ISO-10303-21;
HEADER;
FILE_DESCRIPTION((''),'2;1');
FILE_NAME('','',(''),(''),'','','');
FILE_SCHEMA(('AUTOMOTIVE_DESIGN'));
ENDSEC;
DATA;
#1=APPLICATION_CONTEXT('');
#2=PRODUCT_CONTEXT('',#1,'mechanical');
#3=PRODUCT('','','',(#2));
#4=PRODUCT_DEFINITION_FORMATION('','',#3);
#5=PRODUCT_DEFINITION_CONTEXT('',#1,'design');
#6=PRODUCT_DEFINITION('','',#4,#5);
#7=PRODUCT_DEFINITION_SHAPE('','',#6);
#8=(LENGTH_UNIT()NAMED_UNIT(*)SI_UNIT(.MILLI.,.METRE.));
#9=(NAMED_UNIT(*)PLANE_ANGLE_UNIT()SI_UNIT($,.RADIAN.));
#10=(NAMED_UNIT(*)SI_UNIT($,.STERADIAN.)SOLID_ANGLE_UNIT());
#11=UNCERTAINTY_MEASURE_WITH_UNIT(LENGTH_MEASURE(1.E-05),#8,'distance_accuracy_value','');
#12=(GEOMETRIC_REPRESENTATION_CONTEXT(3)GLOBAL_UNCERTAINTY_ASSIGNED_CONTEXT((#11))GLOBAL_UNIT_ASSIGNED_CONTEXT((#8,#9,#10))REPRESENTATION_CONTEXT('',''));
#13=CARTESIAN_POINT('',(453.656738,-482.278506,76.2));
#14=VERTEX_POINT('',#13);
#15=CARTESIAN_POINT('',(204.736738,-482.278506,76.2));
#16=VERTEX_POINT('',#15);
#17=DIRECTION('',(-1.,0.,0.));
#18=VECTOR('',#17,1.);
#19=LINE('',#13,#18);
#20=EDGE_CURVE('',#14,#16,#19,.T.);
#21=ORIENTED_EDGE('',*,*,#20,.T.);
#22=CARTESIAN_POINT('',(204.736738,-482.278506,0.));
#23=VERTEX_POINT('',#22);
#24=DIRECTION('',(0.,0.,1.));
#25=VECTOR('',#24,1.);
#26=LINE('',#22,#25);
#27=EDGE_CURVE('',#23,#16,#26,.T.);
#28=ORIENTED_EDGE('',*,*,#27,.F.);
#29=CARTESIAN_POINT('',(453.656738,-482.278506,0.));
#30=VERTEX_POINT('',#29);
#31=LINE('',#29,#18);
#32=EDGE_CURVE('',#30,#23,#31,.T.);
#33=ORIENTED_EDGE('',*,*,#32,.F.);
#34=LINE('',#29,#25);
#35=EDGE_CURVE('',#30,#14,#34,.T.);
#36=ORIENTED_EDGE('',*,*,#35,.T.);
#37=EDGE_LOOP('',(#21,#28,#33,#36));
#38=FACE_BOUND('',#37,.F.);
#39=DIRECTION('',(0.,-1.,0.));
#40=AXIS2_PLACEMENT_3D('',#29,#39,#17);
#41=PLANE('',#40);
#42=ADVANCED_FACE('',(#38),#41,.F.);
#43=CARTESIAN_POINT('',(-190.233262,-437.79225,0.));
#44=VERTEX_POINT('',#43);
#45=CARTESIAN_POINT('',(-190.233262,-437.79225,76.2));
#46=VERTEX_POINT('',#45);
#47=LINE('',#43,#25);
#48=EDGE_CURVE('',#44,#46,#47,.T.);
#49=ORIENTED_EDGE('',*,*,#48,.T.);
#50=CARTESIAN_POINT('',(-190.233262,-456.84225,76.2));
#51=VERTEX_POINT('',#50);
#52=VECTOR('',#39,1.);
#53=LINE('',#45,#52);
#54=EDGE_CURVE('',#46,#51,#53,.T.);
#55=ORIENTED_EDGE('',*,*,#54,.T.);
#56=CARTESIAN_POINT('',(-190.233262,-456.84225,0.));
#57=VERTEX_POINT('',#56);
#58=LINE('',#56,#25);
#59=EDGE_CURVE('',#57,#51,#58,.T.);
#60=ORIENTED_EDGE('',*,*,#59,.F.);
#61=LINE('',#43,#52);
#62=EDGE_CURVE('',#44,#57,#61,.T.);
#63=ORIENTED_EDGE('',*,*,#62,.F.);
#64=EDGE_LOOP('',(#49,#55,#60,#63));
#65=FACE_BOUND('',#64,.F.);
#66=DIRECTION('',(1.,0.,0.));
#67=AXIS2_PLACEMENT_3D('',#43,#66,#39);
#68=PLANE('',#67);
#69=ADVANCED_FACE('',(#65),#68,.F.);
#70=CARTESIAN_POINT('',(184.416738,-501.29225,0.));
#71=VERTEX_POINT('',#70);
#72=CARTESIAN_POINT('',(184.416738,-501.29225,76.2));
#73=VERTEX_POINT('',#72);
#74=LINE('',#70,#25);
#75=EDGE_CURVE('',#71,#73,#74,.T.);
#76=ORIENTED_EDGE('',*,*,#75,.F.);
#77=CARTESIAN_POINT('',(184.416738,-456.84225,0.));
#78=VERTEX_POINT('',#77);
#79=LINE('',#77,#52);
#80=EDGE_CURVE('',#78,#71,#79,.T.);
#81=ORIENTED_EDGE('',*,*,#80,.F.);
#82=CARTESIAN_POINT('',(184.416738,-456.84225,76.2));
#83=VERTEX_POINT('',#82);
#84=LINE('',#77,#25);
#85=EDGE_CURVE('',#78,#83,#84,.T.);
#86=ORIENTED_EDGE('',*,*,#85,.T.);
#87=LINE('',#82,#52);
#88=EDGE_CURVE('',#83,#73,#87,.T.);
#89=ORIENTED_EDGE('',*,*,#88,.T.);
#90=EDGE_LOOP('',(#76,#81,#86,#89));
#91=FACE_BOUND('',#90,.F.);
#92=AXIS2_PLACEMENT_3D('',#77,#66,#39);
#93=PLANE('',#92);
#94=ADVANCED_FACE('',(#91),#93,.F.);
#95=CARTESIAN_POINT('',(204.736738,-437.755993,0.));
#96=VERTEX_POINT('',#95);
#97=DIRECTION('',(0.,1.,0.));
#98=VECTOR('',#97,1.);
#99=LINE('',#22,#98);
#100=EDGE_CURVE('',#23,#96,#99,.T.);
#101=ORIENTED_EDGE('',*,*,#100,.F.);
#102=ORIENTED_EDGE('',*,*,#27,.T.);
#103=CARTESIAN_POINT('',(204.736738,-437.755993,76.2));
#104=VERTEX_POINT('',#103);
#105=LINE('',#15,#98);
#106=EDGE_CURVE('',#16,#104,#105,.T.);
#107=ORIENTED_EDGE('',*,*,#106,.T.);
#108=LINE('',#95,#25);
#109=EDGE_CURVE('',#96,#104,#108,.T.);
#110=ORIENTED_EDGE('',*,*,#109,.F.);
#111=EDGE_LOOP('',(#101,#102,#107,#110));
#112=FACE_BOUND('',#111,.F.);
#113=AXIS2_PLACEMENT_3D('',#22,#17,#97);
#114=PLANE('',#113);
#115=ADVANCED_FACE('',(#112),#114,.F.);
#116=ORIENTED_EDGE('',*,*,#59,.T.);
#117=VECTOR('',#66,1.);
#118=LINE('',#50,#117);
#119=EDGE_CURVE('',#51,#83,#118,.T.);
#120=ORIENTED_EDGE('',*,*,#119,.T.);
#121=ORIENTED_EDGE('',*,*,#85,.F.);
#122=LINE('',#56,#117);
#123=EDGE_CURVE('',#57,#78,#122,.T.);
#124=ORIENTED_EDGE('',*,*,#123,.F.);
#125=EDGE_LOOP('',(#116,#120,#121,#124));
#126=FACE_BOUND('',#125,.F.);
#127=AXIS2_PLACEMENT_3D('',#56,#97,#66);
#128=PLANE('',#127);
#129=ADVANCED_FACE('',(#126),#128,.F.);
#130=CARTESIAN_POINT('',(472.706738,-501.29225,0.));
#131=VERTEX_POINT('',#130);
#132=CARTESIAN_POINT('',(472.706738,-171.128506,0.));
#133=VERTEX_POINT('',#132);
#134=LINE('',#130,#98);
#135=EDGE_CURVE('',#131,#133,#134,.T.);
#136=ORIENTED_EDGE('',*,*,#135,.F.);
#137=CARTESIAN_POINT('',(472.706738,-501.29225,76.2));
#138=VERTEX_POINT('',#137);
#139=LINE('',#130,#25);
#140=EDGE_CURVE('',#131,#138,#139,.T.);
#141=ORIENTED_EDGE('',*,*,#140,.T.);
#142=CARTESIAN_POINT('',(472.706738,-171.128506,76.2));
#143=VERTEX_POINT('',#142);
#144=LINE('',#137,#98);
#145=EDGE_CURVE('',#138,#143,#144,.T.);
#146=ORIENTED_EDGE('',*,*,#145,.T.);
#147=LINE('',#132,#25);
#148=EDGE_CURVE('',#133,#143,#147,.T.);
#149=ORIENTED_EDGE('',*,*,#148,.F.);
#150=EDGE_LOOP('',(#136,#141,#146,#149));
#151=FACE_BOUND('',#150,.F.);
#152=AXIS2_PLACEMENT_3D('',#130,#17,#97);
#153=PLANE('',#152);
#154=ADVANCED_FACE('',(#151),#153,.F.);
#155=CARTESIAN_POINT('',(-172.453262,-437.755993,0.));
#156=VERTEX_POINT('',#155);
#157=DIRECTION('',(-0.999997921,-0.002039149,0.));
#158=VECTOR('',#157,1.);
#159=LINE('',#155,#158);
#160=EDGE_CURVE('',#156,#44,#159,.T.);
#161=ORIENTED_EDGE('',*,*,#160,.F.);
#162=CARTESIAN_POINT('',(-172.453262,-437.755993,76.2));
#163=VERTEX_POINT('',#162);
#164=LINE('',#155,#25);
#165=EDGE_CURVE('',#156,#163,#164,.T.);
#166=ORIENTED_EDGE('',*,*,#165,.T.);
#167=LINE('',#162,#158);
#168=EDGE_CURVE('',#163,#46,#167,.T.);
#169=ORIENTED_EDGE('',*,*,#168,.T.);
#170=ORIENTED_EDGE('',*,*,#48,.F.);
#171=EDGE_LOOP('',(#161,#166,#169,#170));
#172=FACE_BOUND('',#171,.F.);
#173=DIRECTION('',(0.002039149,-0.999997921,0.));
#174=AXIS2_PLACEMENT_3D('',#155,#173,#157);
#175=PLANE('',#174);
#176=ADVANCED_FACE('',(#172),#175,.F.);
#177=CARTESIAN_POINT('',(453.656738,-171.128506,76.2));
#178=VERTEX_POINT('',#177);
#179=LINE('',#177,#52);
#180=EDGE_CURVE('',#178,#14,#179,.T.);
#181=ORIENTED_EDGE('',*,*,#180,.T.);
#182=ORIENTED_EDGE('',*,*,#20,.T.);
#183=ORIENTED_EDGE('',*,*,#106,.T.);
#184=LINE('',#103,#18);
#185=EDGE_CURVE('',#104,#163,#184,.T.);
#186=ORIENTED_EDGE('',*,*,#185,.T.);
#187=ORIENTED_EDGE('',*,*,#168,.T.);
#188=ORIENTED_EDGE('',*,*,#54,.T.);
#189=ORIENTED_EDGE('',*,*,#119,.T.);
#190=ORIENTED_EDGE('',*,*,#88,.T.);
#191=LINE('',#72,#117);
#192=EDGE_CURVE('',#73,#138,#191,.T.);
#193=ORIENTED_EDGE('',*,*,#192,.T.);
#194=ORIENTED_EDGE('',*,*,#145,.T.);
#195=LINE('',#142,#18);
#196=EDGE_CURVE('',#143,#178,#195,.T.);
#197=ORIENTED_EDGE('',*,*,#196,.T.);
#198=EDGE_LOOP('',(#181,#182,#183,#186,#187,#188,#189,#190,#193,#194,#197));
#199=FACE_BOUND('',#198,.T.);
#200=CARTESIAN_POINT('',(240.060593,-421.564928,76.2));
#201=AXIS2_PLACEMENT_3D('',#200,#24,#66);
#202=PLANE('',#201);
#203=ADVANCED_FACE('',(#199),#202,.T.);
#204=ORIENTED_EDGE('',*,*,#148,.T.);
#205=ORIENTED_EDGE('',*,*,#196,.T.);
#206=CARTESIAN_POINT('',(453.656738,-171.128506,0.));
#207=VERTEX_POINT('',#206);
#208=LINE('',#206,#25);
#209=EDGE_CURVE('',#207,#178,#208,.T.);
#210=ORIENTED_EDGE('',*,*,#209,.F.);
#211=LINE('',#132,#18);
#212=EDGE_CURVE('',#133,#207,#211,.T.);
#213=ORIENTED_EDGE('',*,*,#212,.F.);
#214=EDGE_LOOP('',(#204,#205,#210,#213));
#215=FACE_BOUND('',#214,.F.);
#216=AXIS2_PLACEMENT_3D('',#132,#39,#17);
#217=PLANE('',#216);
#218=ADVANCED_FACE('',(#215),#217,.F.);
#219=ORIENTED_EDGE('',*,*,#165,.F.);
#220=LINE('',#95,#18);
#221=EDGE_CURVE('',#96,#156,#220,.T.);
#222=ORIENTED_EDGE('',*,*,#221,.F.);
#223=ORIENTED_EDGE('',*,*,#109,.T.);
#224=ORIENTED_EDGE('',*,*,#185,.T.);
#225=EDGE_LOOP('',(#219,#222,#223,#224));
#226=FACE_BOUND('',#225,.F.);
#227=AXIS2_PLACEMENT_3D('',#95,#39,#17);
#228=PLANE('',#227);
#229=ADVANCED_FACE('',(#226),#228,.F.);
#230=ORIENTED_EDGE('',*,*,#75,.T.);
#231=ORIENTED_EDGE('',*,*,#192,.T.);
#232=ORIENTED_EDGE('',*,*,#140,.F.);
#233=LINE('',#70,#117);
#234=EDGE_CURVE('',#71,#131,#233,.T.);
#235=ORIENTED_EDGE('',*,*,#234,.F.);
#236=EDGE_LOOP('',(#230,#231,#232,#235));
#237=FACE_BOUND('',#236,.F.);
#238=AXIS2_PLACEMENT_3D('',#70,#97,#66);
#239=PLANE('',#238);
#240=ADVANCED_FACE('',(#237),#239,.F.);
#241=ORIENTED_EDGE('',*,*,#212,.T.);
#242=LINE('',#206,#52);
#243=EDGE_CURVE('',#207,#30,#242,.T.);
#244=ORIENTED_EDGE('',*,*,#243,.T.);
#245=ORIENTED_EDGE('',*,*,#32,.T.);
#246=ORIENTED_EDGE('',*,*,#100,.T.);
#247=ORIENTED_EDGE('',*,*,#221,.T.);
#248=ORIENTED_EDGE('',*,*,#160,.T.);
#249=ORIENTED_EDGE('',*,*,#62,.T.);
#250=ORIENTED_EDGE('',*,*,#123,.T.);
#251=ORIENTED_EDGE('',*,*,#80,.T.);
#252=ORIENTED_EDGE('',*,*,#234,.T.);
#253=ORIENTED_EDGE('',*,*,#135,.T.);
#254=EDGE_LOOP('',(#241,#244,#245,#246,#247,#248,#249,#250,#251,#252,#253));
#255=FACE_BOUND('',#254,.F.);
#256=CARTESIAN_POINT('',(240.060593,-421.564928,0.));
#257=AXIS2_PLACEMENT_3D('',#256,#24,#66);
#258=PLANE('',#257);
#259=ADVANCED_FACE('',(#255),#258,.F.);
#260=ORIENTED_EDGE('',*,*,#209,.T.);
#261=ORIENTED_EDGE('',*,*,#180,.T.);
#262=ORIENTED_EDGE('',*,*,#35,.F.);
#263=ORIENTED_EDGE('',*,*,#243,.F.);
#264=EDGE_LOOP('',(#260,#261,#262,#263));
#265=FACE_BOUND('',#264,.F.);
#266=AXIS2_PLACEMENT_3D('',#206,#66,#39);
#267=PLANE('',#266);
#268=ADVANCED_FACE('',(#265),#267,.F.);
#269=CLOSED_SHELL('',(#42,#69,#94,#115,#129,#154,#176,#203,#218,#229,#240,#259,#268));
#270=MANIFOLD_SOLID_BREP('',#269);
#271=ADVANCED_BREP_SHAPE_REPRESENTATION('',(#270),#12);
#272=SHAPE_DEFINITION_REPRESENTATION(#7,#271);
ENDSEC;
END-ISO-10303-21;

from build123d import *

# Parameters (mm, degrees)
F1_DEPTH = 76.2


# Not quite as in the source:
# - a feature names something its author has since deleted; it is built from what else it names


with BuildPart() as f1:
    # F0 (on Top) → F1 (new body)
    with BuildSketch(Plane.XY):
        Polygon((-190.23326214, -437.7922495125), (-190.23326214, -456.8422495125), (184.41673786, -456.8422495125), (184.41673786, -501.2922495125), (472.70673786, -501.2922495125), (472.70673786, -171.1285056541), (453.65673786, -171.1285056541), (453.65673786, -482.2785056541), (204.73673786, -482.2785056541), (204.73673786, -437.7559933709), (-172.45326214, -437.7559933709), align=None)
    extrude(amount=F1_DEPTH)


solid = f1.part
